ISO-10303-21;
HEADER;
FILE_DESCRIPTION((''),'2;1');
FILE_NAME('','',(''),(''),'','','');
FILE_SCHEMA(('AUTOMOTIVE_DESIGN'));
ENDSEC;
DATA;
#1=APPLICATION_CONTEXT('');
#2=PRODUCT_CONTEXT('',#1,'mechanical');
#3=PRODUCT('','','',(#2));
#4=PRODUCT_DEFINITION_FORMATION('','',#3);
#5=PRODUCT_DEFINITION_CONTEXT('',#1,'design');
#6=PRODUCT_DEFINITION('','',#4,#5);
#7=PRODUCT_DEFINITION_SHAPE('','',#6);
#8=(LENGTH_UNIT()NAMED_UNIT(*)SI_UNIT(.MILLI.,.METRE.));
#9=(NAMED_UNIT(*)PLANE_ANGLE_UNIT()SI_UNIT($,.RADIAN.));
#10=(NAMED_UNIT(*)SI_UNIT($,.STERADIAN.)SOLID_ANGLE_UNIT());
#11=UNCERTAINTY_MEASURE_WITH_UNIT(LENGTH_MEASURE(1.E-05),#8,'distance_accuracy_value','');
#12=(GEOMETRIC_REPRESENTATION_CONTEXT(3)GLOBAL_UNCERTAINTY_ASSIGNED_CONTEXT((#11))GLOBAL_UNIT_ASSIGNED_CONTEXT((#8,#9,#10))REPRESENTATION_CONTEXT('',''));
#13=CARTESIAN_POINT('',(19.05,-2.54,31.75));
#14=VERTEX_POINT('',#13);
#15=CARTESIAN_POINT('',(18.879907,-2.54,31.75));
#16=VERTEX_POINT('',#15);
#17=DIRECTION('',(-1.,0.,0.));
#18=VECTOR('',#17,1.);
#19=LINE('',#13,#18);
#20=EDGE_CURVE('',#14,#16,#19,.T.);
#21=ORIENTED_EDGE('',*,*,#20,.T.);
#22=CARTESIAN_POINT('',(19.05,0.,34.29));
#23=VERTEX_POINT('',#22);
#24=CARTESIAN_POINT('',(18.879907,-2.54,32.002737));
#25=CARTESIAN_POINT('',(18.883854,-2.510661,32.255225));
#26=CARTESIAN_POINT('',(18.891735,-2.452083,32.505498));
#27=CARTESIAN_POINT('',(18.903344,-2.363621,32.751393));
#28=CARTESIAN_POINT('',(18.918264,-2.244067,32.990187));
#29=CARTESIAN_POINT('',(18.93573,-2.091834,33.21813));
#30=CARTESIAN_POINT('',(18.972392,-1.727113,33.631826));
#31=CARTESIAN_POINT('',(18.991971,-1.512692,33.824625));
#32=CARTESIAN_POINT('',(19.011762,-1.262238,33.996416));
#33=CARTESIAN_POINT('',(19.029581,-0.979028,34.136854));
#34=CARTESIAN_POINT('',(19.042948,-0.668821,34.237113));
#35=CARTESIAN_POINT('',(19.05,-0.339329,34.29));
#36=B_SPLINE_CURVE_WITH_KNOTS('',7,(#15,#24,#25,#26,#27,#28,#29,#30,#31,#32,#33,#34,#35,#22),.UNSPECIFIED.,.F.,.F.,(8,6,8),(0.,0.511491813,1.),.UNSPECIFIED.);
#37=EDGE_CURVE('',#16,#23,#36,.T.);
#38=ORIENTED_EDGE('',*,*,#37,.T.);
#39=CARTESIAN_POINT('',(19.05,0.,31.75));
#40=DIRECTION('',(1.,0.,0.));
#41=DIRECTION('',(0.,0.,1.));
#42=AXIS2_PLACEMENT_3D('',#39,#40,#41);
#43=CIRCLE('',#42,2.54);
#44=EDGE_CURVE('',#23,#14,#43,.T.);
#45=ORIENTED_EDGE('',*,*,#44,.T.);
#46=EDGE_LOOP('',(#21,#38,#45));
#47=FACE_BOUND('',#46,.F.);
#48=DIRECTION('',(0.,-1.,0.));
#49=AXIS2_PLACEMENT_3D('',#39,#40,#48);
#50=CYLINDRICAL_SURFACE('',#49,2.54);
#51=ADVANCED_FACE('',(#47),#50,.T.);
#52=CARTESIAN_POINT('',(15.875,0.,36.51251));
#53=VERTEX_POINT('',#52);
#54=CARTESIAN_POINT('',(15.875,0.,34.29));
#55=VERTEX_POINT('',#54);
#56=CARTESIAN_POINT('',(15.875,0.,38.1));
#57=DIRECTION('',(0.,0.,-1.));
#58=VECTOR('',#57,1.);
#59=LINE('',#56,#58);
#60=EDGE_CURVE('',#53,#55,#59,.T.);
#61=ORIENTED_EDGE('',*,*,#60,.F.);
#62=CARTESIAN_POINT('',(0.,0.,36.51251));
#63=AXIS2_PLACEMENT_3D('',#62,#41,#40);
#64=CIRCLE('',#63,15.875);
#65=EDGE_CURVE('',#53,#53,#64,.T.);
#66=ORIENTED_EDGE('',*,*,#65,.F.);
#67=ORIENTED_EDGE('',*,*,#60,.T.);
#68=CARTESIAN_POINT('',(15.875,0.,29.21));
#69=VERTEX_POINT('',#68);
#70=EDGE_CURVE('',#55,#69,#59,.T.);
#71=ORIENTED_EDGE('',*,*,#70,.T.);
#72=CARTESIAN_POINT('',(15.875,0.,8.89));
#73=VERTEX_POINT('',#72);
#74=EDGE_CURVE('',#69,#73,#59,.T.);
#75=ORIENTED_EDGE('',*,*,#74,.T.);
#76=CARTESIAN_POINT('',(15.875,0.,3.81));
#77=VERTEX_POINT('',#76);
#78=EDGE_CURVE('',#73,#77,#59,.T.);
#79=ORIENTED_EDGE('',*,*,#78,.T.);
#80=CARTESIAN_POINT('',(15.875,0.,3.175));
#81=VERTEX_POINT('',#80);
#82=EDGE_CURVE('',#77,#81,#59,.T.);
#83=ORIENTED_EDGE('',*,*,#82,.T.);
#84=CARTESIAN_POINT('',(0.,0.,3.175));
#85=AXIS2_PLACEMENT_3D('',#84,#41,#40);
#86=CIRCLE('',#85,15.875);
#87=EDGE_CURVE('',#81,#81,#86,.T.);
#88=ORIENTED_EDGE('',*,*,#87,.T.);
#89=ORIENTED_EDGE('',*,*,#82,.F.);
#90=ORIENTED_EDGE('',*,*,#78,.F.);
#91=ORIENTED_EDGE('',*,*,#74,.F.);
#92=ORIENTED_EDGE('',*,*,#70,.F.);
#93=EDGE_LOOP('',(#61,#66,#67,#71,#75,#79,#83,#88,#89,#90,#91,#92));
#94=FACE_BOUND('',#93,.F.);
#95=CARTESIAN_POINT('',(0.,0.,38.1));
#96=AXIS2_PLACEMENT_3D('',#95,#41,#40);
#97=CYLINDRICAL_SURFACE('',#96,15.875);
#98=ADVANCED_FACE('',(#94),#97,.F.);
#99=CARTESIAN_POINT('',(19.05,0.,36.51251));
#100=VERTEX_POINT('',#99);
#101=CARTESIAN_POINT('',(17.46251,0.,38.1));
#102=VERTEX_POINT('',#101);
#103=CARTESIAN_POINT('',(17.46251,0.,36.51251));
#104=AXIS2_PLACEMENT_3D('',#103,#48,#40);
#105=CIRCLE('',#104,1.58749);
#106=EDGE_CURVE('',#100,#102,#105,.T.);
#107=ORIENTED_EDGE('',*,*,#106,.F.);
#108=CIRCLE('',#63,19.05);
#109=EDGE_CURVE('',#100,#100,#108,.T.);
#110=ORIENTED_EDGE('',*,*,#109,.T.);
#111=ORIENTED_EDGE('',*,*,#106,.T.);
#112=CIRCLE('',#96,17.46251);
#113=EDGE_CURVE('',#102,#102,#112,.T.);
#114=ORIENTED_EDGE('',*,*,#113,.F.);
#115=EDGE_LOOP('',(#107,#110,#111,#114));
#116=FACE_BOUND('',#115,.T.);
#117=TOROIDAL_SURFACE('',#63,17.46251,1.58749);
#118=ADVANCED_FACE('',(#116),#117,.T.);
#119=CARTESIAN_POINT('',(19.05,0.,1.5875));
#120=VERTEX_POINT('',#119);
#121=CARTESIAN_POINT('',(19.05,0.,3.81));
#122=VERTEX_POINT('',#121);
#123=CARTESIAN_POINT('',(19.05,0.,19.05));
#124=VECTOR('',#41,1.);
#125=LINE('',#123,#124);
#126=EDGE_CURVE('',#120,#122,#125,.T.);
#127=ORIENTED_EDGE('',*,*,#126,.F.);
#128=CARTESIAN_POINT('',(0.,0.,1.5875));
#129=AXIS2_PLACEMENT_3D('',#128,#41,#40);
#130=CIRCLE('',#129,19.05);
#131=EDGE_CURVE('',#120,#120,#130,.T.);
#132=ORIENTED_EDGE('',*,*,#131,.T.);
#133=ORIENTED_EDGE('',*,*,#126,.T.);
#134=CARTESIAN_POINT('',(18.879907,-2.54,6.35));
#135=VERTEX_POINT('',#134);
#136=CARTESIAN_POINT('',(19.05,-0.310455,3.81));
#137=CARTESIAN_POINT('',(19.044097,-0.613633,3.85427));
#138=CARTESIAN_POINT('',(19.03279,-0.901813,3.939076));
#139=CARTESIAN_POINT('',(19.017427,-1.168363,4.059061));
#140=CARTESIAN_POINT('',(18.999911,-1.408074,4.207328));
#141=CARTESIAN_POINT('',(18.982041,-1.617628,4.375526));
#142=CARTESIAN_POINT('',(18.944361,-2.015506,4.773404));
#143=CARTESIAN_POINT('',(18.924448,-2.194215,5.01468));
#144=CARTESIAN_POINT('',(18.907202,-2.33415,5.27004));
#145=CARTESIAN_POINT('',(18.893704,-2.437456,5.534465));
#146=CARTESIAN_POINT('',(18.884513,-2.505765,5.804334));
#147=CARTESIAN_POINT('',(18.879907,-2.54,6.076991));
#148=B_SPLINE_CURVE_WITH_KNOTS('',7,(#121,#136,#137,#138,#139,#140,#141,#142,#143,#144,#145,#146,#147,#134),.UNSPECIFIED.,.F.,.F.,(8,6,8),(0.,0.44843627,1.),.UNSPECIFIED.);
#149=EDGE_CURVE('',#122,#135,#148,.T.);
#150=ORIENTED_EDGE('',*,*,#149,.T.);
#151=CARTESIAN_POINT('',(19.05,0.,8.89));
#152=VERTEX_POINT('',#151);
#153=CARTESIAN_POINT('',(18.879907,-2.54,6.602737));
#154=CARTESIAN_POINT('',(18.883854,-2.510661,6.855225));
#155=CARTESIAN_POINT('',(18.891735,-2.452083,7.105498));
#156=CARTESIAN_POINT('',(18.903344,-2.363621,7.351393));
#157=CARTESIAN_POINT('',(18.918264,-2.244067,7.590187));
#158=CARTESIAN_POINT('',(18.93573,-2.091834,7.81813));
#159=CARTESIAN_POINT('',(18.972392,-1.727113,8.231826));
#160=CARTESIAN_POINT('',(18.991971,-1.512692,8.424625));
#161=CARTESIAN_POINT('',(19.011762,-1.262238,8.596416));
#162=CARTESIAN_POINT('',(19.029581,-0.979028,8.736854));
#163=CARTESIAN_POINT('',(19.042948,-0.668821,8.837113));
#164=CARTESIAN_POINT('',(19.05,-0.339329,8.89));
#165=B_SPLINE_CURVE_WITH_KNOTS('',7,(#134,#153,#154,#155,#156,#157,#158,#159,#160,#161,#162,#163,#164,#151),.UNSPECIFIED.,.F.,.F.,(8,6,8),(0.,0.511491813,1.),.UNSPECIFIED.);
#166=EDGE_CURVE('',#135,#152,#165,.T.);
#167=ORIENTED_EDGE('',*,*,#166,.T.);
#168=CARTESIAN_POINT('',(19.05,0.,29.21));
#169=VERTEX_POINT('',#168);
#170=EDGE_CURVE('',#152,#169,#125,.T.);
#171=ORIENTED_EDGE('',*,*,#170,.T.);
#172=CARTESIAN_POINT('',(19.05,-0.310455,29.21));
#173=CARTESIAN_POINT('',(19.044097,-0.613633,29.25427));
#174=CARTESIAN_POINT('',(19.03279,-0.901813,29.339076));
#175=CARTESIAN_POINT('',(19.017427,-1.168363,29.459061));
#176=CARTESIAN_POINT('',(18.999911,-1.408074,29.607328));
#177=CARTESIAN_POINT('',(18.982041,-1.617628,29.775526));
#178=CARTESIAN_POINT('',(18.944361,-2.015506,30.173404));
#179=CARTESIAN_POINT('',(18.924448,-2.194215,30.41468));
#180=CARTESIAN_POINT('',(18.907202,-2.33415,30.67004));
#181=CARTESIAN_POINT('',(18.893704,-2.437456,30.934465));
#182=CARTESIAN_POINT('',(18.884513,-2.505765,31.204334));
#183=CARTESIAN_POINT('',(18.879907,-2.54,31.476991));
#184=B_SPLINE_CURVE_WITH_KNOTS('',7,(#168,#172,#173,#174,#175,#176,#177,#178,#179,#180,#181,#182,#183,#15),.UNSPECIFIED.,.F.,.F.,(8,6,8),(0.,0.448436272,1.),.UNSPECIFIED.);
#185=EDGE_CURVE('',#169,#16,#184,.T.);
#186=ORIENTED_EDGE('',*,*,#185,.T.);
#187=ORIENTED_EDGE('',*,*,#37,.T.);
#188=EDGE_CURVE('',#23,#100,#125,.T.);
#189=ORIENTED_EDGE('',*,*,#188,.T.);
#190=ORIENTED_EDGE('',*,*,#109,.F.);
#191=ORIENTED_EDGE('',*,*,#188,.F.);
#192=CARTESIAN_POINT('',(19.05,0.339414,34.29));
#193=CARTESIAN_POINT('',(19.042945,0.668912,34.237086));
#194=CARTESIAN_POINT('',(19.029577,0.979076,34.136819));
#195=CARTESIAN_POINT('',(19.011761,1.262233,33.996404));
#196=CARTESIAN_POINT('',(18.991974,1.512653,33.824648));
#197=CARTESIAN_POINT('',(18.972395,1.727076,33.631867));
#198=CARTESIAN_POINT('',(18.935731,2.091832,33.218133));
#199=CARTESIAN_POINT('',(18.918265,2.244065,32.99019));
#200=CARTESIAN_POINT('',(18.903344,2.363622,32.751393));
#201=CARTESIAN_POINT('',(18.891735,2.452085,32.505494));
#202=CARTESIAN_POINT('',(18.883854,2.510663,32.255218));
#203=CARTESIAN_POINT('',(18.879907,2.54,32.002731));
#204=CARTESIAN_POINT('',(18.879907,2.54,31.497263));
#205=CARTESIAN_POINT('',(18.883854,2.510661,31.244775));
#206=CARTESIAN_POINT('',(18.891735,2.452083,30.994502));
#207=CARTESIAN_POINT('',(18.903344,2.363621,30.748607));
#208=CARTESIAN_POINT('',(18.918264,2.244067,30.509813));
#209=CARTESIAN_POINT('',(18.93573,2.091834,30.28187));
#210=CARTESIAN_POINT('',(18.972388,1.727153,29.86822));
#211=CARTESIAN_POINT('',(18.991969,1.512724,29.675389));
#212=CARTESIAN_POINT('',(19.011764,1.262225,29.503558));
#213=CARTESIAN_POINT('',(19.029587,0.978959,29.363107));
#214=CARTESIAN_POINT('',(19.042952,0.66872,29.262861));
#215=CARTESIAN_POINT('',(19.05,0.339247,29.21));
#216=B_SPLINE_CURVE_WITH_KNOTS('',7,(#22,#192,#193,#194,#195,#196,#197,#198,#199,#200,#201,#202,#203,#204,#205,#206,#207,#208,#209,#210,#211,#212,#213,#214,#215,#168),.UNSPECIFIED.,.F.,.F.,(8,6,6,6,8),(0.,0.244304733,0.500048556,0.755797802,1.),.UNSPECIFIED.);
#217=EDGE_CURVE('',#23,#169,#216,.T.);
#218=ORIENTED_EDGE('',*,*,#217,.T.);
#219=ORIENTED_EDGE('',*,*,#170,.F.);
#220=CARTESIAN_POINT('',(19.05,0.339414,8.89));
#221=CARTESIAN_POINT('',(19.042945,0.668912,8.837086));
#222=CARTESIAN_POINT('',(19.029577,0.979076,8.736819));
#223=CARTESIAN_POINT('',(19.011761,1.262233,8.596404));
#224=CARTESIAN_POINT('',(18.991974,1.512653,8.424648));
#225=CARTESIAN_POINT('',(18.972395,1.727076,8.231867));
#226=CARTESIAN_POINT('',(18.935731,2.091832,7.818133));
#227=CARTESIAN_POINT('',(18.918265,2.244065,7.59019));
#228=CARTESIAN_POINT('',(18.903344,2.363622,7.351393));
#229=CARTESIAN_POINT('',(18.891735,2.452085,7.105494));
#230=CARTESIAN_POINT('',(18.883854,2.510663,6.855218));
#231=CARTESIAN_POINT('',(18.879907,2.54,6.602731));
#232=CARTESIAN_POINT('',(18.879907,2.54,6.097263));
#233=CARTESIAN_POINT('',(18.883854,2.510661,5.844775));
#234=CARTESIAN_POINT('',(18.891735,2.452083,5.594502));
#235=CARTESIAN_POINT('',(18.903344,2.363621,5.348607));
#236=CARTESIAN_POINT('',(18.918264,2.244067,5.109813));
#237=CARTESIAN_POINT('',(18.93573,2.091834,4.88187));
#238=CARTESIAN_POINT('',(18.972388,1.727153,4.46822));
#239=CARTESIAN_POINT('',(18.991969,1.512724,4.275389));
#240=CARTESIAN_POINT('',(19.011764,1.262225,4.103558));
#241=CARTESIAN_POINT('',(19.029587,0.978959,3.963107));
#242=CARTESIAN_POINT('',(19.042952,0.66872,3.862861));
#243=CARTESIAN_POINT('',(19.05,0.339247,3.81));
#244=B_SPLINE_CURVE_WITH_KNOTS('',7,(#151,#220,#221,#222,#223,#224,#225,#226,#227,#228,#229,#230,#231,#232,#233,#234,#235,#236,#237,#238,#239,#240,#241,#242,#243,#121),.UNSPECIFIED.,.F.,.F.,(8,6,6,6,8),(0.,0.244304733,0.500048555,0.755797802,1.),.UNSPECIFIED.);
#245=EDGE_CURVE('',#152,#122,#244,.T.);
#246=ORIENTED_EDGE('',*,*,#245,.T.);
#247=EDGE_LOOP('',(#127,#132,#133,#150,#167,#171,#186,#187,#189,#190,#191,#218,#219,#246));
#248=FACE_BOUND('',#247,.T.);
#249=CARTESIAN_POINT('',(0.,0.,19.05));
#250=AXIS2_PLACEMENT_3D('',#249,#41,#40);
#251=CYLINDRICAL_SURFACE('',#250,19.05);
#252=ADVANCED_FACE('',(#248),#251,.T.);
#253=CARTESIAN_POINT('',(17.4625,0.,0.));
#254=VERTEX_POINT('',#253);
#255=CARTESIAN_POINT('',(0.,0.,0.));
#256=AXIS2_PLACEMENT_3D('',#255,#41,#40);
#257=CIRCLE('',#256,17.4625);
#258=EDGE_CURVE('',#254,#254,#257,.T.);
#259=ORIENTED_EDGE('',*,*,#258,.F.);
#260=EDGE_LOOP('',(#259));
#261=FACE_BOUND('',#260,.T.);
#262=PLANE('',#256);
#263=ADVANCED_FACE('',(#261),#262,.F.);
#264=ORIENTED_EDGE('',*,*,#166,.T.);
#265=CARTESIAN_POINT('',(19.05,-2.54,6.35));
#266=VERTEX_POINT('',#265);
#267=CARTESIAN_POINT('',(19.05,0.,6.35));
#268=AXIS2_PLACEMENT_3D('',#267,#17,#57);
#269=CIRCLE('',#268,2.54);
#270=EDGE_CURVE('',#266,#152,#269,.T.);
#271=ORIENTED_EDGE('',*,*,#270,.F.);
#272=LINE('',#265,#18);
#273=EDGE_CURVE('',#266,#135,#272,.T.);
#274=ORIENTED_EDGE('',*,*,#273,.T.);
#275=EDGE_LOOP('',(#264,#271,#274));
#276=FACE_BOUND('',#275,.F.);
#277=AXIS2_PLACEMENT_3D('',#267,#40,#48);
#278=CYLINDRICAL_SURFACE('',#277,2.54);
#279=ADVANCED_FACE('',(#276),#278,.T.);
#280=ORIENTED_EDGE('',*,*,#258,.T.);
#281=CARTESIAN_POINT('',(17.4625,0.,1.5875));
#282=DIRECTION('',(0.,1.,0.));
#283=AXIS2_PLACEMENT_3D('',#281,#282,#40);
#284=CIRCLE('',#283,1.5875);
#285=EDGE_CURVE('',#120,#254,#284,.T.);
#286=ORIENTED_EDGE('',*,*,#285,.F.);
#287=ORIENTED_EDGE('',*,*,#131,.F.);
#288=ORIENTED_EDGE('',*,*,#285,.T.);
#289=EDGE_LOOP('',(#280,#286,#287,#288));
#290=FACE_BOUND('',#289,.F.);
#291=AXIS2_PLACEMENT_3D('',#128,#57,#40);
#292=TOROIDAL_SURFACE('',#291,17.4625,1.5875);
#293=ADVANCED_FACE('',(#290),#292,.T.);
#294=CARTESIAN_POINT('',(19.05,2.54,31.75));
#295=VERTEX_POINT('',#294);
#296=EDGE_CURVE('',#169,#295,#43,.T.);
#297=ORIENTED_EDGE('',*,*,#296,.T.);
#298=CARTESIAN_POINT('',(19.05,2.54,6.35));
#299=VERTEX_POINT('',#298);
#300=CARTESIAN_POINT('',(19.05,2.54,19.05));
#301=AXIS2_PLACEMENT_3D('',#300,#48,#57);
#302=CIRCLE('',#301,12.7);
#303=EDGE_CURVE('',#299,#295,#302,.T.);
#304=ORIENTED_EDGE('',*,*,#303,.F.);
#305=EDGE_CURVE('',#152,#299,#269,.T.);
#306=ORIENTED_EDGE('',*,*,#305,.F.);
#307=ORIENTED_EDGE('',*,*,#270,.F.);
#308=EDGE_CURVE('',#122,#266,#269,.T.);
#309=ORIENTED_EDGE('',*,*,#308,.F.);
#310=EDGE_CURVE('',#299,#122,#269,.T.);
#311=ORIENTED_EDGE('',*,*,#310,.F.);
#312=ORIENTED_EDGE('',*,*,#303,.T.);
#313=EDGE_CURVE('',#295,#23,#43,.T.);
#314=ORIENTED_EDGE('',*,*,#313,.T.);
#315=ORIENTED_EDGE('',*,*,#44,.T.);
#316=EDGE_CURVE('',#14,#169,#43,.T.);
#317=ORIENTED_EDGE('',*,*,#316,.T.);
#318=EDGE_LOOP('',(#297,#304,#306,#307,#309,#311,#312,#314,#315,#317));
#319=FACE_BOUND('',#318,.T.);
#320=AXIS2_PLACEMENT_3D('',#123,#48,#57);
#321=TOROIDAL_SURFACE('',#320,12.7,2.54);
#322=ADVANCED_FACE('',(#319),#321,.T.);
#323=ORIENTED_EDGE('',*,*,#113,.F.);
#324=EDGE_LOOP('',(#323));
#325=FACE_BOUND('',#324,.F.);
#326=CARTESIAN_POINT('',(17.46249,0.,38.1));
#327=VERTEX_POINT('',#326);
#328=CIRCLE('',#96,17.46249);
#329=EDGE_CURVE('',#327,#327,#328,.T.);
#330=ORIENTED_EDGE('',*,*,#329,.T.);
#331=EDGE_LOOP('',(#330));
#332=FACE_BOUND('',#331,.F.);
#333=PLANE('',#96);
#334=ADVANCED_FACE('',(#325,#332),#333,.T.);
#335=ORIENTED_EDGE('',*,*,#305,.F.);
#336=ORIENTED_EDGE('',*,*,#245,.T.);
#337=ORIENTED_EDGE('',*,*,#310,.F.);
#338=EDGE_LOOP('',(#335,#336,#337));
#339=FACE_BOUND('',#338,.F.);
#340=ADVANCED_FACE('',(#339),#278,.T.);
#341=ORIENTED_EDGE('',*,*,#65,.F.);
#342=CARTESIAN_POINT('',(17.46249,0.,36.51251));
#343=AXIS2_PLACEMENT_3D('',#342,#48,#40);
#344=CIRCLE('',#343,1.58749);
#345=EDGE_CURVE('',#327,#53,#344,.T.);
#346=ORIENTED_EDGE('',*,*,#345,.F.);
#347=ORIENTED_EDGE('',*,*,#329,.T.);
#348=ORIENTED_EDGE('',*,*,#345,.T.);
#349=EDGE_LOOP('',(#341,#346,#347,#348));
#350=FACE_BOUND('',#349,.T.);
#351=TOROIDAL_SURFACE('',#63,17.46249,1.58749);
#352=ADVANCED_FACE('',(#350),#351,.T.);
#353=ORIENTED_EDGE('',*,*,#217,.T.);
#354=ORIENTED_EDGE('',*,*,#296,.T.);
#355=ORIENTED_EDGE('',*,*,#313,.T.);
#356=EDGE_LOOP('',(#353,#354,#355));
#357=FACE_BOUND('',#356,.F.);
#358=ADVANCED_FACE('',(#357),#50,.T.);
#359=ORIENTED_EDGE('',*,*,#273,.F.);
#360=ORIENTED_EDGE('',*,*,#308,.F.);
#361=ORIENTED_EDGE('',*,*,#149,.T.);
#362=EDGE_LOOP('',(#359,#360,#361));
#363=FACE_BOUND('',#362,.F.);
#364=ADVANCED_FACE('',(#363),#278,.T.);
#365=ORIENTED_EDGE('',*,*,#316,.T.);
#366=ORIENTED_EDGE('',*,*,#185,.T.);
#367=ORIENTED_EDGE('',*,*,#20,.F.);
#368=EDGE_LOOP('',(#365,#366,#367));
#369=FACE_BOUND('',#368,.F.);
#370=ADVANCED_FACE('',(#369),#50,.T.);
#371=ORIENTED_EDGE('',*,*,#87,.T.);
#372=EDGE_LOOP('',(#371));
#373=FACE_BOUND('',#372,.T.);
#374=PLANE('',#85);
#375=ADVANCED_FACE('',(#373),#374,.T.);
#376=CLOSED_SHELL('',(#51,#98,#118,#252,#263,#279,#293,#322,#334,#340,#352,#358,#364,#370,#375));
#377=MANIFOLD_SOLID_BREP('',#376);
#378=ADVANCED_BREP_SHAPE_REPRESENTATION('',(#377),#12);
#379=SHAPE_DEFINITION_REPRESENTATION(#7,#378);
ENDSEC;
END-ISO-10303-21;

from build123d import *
from build123d import SkipClean  # not in build123d's __all__

# Parameters (mm, degrees)
F0_W      = 19.05
F0_H      = 38.1
F2_R      = 15.875
F3_DEPTH  = 34.925
F6_R      = 1.58749
F7_R      = 1.5875
F8_R      = 2.54
F10_R     = 2.54
F11_R     = 2.54
F12_DEPTH = 3.175


# Not quite as in the source:
# - a fillet or chamfer is up to 0.001 mm smaller than in the source, because OpenCascade refuses the exact size


with BuildPart() as f1:
    # F0 (on Front) → F1 (revolve)
    with BuildSketch(Plane.XZ):
        with Locations((9.525, 19.05)):
            Rectangle(F0_W, F0_H)
    revolve(axis=Axis((0, 0, 19.05), (0, 0, 1)))

    # F2 (on face) → F3 (cut)
    with BuildSketch(Plane.XY.offset(38.1)):
        Circle(F2_R)
    extrude(amount=-F3_DEPTH, mode=Mode.SUBTRACT)

    # F6 (radius 1.5875 in the source; OpenCascade refuses exactly that, so slightly less here)
    f6_edges = [f1.edges().sort_by_distance(p)[0] for p in [
        (-19.05, 0, 38.1),
        (-15.875, 0, 38.1),
    ]]
    fillet(f6_edges, radius=F6_R)

    # F7
    f7_edges = [f1.edges().sort_by_distance(p)[0] for p in [
        (-19.05, 0, 0),
    ]]
    fillet(f7_edges, radius=F7_R)

    # F9: sweep along a path in F5
    with BuildLine(Plane.XZ) as f9_path:
        ThreePointArc((19.05, 6.35), (31.75, 19.05), (19.05, 31.75))
    # F8 (on offset) → F9 (sweep)
    with BuildSketch(Plane.YZ.offset(19.05)):
        with Locations((0, 31.75)):
            Circle(F8_R)
    sweep(path=f9_path.line)

    # F10 (on face) + F11 (on face) → F12 (join, through all)
    with BuildSketch(Plane(origin=(19.05, 0, 0), x_dir=(0, -1, 0), z_dir=(-1, 0, 0))):
        with Locations((0, 31.75)):
            Circle(F10_R)
    with BuildSketch(Plane(origin=(19.05, 0, 0), x_dir=(0, -1, 0), z_dir=(-1, 0, 0))):
        with Locations((0, 6.35)):
            Circle(F11_R)
    with SkipClean():  # cleaning this boolean's faces spoils the solid; the shape is the same uncleaned
        extrude(amount=F12_DEPTH)


solid = f1.part
